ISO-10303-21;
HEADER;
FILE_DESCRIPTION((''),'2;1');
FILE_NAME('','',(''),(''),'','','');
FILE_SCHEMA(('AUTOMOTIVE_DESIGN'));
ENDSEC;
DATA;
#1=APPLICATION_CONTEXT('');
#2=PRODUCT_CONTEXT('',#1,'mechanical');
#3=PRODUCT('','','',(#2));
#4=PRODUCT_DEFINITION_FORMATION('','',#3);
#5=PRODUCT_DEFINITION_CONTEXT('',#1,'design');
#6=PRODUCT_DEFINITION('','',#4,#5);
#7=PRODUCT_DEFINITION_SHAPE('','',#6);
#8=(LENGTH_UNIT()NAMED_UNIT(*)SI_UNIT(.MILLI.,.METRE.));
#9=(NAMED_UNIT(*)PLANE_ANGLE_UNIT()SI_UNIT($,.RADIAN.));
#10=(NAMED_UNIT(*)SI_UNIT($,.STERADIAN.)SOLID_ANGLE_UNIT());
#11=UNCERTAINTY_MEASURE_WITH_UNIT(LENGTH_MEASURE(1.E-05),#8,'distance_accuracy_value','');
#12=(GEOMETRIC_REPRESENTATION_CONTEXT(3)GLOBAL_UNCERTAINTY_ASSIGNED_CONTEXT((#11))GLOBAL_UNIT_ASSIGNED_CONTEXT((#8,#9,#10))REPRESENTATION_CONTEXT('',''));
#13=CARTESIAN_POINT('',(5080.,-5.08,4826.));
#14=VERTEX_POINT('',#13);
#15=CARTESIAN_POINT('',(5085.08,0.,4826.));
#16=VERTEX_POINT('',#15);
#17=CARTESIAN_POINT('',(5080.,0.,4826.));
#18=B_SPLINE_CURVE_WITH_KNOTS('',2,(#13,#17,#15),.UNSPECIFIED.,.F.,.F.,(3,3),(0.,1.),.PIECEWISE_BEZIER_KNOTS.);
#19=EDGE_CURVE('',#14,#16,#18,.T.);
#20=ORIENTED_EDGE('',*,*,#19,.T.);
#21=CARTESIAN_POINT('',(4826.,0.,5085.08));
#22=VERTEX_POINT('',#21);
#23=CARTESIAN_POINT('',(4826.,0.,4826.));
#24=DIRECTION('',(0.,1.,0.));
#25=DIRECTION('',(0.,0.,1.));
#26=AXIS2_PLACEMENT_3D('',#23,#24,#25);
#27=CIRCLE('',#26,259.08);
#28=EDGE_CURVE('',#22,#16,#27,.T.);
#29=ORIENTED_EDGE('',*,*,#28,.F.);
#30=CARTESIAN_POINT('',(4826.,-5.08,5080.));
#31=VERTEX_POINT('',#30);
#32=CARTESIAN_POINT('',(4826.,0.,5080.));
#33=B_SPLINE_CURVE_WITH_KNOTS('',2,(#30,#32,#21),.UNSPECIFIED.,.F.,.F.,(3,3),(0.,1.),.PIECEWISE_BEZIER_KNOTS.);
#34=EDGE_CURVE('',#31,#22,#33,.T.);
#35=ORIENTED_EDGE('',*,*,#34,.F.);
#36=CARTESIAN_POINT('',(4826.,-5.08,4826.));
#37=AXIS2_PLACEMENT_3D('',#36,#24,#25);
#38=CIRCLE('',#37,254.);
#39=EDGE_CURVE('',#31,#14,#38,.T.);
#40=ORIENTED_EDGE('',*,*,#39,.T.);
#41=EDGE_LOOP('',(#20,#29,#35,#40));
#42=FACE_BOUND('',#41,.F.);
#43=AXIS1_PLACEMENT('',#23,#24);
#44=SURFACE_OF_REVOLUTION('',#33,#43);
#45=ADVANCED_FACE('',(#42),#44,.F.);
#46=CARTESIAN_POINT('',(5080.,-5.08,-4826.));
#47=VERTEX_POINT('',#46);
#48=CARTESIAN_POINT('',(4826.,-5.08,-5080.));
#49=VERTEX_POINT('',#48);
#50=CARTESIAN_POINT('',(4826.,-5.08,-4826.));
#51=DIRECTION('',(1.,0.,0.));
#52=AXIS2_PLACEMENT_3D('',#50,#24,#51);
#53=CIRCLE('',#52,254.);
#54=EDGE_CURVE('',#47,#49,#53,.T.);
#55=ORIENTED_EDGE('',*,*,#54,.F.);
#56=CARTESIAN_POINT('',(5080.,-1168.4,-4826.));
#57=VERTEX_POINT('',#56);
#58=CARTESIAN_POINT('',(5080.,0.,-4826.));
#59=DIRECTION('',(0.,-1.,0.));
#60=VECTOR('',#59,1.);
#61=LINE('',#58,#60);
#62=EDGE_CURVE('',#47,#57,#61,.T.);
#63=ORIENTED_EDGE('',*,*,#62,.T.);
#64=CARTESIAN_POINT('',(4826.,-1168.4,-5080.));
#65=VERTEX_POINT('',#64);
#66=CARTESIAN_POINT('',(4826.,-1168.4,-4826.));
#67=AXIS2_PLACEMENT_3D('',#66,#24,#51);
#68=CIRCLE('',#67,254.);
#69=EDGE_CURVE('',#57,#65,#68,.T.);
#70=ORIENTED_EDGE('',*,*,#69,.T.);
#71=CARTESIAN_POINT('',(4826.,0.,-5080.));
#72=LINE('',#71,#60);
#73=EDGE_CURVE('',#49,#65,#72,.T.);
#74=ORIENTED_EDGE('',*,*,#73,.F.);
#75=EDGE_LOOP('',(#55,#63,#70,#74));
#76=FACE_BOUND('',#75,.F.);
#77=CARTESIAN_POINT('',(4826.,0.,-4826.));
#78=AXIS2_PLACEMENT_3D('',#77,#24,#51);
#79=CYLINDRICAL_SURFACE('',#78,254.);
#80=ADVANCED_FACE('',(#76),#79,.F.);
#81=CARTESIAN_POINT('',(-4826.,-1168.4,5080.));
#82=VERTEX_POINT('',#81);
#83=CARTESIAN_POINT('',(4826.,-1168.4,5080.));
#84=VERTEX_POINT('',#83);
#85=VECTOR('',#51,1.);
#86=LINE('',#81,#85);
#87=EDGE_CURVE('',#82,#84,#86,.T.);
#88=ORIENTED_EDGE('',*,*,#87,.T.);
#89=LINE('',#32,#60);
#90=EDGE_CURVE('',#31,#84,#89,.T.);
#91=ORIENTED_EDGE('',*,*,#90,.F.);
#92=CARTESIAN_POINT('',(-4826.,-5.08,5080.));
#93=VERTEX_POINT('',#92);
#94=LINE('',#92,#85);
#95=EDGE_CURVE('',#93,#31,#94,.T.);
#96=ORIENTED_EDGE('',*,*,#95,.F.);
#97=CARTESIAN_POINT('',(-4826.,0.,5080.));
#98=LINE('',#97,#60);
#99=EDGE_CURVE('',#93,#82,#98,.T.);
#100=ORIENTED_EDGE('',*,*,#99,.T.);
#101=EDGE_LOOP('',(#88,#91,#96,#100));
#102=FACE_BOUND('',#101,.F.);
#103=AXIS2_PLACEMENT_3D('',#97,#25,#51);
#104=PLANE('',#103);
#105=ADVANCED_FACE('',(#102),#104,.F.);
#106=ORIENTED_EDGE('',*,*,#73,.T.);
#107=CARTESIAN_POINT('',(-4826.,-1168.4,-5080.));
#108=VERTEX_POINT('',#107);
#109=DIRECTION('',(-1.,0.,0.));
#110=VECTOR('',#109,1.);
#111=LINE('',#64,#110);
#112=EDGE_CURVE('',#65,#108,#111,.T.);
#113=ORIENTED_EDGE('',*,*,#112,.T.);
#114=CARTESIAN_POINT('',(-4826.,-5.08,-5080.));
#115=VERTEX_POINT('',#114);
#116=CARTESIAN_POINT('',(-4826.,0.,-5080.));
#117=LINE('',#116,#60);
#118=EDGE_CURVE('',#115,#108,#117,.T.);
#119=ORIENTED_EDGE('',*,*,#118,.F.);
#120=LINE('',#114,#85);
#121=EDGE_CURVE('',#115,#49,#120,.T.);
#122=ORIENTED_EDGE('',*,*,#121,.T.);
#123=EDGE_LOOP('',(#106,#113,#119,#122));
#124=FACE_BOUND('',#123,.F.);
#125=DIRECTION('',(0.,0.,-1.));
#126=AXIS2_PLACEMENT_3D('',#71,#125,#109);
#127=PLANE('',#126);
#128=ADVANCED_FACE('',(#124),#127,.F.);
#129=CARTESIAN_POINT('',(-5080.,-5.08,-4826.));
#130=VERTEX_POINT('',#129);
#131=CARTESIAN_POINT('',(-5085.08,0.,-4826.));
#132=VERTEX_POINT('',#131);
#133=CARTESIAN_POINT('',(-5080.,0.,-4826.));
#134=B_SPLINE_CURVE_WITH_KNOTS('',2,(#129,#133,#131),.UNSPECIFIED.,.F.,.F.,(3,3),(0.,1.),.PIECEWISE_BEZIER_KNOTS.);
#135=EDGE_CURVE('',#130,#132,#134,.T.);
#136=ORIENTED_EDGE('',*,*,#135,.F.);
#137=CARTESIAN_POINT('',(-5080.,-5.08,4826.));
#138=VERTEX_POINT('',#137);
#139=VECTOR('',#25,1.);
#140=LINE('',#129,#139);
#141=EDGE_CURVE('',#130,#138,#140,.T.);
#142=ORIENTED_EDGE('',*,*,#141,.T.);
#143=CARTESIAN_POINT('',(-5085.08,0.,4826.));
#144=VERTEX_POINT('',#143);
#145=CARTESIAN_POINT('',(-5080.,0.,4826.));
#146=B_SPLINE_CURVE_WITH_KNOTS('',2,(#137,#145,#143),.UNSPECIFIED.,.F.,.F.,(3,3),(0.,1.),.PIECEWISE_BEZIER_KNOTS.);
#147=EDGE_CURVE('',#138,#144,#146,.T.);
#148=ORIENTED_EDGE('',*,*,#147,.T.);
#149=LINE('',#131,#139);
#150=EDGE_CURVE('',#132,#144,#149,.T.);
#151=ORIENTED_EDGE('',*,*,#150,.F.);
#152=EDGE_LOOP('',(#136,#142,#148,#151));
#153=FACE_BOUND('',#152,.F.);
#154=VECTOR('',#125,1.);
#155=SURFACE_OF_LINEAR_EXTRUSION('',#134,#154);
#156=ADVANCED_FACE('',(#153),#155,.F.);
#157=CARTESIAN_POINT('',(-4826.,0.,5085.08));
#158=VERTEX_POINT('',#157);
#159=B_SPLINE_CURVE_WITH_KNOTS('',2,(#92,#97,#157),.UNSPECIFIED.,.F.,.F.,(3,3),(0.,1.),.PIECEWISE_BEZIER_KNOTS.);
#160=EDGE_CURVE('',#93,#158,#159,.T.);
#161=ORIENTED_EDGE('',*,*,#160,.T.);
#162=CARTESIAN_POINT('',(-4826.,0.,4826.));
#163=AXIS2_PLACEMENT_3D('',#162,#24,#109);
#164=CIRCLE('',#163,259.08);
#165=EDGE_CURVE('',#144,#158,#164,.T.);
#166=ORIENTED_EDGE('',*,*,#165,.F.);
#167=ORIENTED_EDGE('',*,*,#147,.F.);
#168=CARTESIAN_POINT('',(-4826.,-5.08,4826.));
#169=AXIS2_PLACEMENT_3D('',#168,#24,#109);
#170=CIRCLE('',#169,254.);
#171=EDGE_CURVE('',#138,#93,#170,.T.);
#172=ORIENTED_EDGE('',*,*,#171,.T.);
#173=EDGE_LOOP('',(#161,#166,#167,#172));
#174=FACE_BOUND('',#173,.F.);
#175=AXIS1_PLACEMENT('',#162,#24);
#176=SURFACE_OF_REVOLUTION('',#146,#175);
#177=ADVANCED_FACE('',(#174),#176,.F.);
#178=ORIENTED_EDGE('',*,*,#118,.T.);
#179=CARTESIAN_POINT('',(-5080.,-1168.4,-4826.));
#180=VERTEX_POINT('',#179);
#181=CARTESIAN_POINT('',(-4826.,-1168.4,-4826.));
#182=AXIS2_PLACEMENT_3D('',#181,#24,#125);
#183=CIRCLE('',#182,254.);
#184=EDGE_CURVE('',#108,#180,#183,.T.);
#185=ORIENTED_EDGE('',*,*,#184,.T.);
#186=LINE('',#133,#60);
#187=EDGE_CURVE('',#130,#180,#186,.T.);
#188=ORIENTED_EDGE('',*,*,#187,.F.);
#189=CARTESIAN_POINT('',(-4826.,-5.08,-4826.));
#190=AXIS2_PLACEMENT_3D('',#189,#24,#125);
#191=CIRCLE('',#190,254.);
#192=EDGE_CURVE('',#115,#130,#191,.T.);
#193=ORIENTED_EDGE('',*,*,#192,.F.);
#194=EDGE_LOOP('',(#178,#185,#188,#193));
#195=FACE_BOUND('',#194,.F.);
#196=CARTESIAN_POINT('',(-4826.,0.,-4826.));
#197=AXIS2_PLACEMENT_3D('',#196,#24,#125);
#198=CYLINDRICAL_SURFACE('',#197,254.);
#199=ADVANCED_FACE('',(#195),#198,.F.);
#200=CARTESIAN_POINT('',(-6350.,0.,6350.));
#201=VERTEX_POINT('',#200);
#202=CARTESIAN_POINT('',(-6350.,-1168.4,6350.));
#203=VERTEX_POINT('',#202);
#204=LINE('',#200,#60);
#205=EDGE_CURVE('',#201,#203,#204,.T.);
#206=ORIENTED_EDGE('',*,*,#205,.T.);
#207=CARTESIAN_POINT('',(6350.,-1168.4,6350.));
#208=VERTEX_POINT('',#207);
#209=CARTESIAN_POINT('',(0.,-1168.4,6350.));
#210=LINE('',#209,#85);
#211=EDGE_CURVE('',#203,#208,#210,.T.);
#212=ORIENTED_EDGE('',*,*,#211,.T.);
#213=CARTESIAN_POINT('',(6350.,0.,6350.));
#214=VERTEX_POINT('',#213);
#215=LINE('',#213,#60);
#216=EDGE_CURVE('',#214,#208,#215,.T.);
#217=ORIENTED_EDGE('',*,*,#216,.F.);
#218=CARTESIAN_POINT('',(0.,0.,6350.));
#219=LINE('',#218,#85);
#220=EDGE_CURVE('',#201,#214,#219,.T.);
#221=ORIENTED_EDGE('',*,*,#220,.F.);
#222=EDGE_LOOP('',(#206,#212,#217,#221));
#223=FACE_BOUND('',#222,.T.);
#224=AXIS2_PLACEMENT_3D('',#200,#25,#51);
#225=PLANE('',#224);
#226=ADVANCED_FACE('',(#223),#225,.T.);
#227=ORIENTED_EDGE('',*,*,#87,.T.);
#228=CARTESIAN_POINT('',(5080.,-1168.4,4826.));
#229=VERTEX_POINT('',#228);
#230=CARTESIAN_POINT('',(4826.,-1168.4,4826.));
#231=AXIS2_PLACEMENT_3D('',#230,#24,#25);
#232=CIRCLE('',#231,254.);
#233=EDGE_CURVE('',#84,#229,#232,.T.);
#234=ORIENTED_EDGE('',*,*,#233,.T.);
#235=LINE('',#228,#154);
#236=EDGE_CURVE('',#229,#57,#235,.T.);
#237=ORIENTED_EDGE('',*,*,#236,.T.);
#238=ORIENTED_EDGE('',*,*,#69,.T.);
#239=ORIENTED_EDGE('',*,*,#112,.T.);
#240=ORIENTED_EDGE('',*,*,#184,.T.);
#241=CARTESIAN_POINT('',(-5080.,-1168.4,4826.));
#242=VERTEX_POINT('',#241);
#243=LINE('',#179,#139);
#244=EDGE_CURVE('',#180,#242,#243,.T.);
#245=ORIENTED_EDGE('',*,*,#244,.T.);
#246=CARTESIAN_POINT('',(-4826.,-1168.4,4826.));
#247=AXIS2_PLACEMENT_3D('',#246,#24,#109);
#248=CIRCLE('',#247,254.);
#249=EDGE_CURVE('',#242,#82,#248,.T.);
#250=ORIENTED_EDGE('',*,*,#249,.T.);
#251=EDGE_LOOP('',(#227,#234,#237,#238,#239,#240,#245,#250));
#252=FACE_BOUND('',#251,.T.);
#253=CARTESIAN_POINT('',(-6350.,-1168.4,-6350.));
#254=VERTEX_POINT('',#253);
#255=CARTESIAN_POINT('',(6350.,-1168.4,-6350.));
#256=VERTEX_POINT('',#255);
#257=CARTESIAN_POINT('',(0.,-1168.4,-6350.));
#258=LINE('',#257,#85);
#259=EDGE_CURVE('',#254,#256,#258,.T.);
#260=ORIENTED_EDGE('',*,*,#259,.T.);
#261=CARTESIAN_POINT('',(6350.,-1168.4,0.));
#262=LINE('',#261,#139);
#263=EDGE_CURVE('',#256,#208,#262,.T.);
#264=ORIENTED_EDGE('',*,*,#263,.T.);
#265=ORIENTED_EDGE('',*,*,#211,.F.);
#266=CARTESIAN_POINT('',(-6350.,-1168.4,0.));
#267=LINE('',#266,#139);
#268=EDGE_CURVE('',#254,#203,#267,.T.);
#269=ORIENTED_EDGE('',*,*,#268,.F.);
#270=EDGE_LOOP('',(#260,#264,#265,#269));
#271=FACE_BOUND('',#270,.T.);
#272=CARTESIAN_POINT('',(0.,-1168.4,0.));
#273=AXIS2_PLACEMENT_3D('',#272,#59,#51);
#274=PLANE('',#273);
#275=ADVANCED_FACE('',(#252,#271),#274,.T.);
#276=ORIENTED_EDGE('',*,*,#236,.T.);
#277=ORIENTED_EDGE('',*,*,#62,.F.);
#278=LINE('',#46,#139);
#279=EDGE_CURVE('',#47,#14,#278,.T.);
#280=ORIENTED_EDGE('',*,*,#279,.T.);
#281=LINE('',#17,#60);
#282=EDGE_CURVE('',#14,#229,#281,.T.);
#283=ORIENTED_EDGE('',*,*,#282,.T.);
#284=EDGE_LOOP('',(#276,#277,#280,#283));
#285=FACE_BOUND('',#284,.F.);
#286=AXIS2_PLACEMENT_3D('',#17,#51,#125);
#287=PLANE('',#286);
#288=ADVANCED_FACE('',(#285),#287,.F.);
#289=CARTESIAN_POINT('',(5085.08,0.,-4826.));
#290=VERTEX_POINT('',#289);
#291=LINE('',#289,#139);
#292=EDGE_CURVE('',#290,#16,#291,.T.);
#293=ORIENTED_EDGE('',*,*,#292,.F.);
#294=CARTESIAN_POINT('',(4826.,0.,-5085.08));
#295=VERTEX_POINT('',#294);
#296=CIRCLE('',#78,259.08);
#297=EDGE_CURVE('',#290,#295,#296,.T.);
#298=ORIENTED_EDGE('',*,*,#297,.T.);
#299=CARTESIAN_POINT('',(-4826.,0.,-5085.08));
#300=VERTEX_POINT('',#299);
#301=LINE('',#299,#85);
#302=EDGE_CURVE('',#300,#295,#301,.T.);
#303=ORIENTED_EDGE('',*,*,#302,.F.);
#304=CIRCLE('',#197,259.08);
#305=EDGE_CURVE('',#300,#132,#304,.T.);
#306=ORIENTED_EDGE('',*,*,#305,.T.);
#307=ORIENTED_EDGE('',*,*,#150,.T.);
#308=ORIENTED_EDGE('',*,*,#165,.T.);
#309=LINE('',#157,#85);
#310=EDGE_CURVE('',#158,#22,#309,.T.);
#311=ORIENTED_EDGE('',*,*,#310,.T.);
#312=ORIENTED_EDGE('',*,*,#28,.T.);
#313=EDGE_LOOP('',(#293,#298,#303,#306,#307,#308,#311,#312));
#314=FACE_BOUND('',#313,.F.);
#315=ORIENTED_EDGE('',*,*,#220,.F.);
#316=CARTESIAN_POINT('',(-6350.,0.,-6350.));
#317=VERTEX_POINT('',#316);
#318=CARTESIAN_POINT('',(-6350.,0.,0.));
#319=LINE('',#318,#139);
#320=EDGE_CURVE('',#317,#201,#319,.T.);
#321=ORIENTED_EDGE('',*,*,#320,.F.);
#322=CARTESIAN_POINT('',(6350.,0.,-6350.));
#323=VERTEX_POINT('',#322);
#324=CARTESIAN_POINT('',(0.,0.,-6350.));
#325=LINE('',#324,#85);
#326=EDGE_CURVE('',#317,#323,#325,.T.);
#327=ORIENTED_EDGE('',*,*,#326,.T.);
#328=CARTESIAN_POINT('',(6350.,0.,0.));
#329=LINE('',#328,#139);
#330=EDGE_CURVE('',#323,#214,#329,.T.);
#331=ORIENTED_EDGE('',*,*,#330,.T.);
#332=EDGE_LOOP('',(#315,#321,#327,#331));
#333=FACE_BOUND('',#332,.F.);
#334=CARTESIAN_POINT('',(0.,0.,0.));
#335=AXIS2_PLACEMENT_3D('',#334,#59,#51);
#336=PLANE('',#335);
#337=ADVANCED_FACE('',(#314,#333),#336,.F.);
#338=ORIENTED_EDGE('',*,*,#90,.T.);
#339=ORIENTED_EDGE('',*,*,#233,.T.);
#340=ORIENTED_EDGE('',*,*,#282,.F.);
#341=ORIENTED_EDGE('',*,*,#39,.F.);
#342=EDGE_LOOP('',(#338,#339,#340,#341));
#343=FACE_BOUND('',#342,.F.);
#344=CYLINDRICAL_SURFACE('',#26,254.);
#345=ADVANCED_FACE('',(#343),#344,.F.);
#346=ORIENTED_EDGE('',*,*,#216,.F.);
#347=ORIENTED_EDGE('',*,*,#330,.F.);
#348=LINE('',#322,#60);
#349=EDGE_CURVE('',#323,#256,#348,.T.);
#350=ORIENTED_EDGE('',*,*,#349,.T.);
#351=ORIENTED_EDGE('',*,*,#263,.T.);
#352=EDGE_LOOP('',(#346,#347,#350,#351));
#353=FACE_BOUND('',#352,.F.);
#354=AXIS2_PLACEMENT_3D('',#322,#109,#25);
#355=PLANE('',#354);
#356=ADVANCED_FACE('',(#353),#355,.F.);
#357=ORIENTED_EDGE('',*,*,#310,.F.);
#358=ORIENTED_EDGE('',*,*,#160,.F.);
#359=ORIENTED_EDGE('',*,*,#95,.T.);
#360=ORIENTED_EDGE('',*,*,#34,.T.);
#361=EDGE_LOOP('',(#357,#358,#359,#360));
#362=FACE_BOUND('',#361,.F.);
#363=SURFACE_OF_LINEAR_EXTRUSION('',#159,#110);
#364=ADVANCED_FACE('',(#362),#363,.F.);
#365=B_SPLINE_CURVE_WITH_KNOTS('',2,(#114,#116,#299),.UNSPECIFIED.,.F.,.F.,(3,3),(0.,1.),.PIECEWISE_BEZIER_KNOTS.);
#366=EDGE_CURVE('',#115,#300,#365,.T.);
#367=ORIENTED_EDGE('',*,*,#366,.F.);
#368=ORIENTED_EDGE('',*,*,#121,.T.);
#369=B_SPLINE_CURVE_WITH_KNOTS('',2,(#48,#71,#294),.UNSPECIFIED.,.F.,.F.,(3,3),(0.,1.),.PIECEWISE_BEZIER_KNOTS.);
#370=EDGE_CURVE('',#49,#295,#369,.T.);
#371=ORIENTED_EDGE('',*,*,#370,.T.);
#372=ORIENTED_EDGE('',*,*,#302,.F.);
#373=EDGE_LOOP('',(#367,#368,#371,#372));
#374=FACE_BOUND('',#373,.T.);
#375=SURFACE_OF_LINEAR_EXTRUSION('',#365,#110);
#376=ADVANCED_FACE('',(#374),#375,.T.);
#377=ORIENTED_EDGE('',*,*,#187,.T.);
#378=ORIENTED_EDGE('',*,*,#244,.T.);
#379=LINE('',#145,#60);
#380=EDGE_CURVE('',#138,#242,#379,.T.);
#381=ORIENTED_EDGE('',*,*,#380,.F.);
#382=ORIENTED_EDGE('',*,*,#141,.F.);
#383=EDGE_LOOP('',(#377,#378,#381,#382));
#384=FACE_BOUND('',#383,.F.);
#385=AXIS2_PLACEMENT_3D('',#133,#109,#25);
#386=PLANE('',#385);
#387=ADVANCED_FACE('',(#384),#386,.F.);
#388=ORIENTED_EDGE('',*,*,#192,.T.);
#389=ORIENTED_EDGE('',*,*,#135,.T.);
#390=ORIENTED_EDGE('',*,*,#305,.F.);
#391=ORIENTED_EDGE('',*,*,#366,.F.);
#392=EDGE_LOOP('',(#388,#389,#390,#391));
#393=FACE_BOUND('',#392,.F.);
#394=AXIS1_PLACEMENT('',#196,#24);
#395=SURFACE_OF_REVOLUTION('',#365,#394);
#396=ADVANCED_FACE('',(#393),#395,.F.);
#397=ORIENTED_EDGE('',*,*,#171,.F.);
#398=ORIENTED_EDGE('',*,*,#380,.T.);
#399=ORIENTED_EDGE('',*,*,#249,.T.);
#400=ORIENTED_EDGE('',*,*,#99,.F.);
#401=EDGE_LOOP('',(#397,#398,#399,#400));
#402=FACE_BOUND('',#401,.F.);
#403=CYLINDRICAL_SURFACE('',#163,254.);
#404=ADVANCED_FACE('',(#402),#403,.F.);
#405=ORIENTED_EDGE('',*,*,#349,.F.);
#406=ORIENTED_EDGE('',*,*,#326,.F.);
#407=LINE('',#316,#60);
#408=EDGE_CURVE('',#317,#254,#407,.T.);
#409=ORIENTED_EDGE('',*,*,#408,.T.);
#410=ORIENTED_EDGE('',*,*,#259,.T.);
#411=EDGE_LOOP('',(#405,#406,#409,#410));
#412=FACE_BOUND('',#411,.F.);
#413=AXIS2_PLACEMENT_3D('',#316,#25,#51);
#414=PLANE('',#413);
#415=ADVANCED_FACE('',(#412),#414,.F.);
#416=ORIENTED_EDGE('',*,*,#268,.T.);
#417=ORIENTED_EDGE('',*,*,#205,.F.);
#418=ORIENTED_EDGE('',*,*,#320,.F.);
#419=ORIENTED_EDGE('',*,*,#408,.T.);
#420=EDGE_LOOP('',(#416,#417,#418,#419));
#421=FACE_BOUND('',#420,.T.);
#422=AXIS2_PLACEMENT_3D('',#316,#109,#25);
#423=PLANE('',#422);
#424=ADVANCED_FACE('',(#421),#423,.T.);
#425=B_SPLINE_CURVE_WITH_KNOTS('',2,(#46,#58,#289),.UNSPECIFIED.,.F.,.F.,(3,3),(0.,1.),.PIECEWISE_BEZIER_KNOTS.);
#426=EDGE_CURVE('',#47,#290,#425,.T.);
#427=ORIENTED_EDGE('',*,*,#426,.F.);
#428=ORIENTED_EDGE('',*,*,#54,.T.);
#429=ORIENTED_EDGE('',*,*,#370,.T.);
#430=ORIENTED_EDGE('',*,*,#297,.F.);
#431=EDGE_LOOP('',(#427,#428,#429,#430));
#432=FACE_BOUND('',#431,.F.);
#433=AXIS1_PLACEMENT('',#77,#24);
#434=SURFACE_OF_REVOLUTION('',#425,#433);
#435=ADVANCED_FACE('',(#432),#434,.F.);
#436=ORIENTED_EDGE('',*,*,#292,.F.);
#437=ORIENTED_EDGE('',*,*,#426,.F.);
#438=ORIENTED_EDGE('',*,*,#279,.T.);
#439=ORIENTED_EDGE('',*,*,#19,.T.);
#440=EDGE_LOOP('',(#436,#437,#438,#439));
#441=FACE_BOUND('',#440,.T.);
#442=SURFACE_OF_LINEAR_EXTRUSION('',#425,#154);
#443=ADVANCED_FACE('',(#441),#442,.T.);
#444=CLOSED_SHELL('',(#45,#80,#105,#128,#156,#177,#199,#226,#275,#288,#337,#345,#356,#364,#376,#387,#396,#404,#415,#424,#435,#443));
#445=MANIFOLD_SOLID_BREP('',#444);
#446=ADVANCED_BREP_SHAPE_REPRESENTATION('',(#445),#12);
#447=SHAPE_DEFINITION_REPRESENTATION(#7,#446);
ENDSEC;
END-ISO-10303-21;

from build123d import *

# Parameters (mm, degrees)
F0_W         = 12700
F0_H         = 12700
F1_DEPTH     = 1168.4
F2_T1_DEPTH  = 9652
F2_T3_DEPTH  = 9652
F2_T6_ANGLE  = 90
F2_T8_ANGLE  = 90
F2_T10_ANGLE = 90
F2_T12_ANGLE = 90


# Not quite as in the source:
# - a fillet or chamfer that OpenCascade refuses, or shapes differently, is made with other operations: its cross-section is extruded or revolved along the edge and cut away or added


with BuildPart() as f1:
    # F0 (on Front) → F1 (new body)
    with BuildSketch(Plane.XZ):
        Rectangle(F0_W, F0_H)
        with BuildLine():
            Line((-5080, -4826), (-5080, 4826))
            ThreePointArc((-5080, 4826), (-5005.6051224214, 5005.6051224214), (-4826, 5080))
            Line((-4826, 5080), (4826, 5080))
            ThreePointArc((4826, 5080), (5005.6051224214, 5005.6051224214), (5080, 4826))
            Line((5080, 4826), (5080, -4826))
            ThreePointArc((5080, -4826), (5005.6051224214, -5005.6051224214), (4826, -5080))
            Line((4826, -5080), (-4826, -5080))
            ThreePointArc((-4826, -5080), (-5005.6051224214, -5005.6051224214), (-5080, -4826))
        make_face(mode=Mode.SUBTRACT)
    extrude(amount=F1_DEPTH)

    # F2: fillet of radius 5.08 on 4 edges, made by hand

    # F2_s2 → F2_t1 (cut)
    with BuildSketch(Plane.YZ.offset(-4826)):
        with BuildLine():
            add(Edge.make_bspline(
                [(-5.08, -5080), (0, -5080), (0, -5085.08)],
                knots=[0, 0, 0, 1, 1, 1], degree=2, weights=[1, 1, 1]))
            Line((0, -5085.08), (0, -5080))
            Line((0, -5080), (-5.08, -5080))
        make_face()
        with BuildLine():
            add(Edge.make_bspline(
                [(-5.08, 5080), (0, 5080), (0, 5085.08)],
                knots=[0, 0, 0, 1, 1, 1], degree=2, weights=[1, 1, 1]))
            Line((0, 5085.08), (0, 5080))
            Line((0, 5080), (-5.08, 5080))
        make_face()
    extrude(amount=F2_T1_DEPTH, mode=Mode.SUBTRACT)

    # F2_s4 → F2_t3 (cut)
    with BuildSketch(Plane.XY.offset(-4826)):
        with BuildLine():
            add(Edge.make_bspline(
                [(-5080, -5.08), (-5080, 0), (-5085.08, 0)],
                knots=[0, 0, 0, 1, 1, 1], degree=2, weights=[1, 1, 1]))
            Line((-5085.08, 0), (-5080, 0))
            Line((-5080, 0), (-5080, -5.08))
        make_face()
        with BuildLine():
            add(Edge.make_bspline(
                [(5080, -5.08), (5080, 0), (5085.08, 0)],
                knots=[0, 0, 0, 1, 1, 1], degree=2, weights=[1, 1, 1]))
            Line((5085.08, 0), (5080, 0))
            Line((5080, 0), (5080, -5.08))
        make_face()
    extrude(amount=F2_T3_DEPTH, mode=Mode.SUBTRACT)

    # F2_s5 → F2_t6 (revolve, cut)
    with BuildSketch(Plane.XY.offset(4826)):
        with BuildLine():
            add(Edge.make_bspline(
                [(-5080, -5.08), (-5080, 0), (-5085.08, 0)],
                knots=[0, 0, 0, 1, 1, 1], degree=2, weights=[1, 1, 1]))
            Line((-5085.08, 0), (-5080, 0))
            Line((-5080, 0), (-5080, -5.08))
        make_face()
    revolve(axis=Axis((-4826, 0, 4826), (0, 1, 0)), revolution_arc=F2_T6_ANGLE, mode=Mode.SUBTRACT)

    # F2_s7 → F2_t8 (revolve, cut)
    with BuildSketch(Plane.YZ.offset(4826)):
        with BuildLine():
            add(Edge.make_bspline(
                [(-5.08, 5080), (0, 5080), (0, 5085.08)],
                knots=[0, 0, 0, 1, 1, 1], degree=2, weights=[1, 1, 1]))
            Line((0, 5085.08), (0, 5080))
            Line((0, 5080), (-5.08, 5080))
        make_face()
    revolve(axis=Axis((4826, 0, 4826), (0, 1, 0)), revolution_arc=F2_T8_ANGLE, mode=Mode.SUBTRACT)

    # F2_s9 → F2_t10 (revolve, cut)
    with BuildSketch(Plane.XY.offset(-4826)):
        with BuildLine():
            add(Edge.make_bspline(
                [(5080, -5.08), (5080, 0), (5085.08, 0)],
                knots=[0, 0, 0, 1, 1, 1], degree=2, weights=[1, 1, 1]))
            Line((5085.08, 0), (5080, 0))
            Line((5080, 0), (5080, -5.08))
        make_face()
    revolve(axis=Axis((4826, 0, -4826), (0, 1, 0)), revolution_arc=F2_T10_ANGLE, mode=Mode.SUBTRACT)

    # F2_s11 → F2_t12 (revolve, cut)
    with BuildSketch(Plane.YZ.offset(-4826)):
        with BuildLine():
            add(Edge.make_bspline(
                [(-5.08, -5080), (0, -5080), (0, -5085.08)],
                knots=[0, 0, 0, 1, 1, 1], degree=2, weights=[1, 1, 1]))
            Line((0, -5085.08), (0, -5080))
            Line((0, -5080), (-5.08, -5080))
        make_face()
    revolve(axis=Axis((-4826, 0, -4826), (0, 1, 0)), revolution_arc=F2_T12_ANGLE, mode=Mode.SUBTRACT)


solid = f1.part
